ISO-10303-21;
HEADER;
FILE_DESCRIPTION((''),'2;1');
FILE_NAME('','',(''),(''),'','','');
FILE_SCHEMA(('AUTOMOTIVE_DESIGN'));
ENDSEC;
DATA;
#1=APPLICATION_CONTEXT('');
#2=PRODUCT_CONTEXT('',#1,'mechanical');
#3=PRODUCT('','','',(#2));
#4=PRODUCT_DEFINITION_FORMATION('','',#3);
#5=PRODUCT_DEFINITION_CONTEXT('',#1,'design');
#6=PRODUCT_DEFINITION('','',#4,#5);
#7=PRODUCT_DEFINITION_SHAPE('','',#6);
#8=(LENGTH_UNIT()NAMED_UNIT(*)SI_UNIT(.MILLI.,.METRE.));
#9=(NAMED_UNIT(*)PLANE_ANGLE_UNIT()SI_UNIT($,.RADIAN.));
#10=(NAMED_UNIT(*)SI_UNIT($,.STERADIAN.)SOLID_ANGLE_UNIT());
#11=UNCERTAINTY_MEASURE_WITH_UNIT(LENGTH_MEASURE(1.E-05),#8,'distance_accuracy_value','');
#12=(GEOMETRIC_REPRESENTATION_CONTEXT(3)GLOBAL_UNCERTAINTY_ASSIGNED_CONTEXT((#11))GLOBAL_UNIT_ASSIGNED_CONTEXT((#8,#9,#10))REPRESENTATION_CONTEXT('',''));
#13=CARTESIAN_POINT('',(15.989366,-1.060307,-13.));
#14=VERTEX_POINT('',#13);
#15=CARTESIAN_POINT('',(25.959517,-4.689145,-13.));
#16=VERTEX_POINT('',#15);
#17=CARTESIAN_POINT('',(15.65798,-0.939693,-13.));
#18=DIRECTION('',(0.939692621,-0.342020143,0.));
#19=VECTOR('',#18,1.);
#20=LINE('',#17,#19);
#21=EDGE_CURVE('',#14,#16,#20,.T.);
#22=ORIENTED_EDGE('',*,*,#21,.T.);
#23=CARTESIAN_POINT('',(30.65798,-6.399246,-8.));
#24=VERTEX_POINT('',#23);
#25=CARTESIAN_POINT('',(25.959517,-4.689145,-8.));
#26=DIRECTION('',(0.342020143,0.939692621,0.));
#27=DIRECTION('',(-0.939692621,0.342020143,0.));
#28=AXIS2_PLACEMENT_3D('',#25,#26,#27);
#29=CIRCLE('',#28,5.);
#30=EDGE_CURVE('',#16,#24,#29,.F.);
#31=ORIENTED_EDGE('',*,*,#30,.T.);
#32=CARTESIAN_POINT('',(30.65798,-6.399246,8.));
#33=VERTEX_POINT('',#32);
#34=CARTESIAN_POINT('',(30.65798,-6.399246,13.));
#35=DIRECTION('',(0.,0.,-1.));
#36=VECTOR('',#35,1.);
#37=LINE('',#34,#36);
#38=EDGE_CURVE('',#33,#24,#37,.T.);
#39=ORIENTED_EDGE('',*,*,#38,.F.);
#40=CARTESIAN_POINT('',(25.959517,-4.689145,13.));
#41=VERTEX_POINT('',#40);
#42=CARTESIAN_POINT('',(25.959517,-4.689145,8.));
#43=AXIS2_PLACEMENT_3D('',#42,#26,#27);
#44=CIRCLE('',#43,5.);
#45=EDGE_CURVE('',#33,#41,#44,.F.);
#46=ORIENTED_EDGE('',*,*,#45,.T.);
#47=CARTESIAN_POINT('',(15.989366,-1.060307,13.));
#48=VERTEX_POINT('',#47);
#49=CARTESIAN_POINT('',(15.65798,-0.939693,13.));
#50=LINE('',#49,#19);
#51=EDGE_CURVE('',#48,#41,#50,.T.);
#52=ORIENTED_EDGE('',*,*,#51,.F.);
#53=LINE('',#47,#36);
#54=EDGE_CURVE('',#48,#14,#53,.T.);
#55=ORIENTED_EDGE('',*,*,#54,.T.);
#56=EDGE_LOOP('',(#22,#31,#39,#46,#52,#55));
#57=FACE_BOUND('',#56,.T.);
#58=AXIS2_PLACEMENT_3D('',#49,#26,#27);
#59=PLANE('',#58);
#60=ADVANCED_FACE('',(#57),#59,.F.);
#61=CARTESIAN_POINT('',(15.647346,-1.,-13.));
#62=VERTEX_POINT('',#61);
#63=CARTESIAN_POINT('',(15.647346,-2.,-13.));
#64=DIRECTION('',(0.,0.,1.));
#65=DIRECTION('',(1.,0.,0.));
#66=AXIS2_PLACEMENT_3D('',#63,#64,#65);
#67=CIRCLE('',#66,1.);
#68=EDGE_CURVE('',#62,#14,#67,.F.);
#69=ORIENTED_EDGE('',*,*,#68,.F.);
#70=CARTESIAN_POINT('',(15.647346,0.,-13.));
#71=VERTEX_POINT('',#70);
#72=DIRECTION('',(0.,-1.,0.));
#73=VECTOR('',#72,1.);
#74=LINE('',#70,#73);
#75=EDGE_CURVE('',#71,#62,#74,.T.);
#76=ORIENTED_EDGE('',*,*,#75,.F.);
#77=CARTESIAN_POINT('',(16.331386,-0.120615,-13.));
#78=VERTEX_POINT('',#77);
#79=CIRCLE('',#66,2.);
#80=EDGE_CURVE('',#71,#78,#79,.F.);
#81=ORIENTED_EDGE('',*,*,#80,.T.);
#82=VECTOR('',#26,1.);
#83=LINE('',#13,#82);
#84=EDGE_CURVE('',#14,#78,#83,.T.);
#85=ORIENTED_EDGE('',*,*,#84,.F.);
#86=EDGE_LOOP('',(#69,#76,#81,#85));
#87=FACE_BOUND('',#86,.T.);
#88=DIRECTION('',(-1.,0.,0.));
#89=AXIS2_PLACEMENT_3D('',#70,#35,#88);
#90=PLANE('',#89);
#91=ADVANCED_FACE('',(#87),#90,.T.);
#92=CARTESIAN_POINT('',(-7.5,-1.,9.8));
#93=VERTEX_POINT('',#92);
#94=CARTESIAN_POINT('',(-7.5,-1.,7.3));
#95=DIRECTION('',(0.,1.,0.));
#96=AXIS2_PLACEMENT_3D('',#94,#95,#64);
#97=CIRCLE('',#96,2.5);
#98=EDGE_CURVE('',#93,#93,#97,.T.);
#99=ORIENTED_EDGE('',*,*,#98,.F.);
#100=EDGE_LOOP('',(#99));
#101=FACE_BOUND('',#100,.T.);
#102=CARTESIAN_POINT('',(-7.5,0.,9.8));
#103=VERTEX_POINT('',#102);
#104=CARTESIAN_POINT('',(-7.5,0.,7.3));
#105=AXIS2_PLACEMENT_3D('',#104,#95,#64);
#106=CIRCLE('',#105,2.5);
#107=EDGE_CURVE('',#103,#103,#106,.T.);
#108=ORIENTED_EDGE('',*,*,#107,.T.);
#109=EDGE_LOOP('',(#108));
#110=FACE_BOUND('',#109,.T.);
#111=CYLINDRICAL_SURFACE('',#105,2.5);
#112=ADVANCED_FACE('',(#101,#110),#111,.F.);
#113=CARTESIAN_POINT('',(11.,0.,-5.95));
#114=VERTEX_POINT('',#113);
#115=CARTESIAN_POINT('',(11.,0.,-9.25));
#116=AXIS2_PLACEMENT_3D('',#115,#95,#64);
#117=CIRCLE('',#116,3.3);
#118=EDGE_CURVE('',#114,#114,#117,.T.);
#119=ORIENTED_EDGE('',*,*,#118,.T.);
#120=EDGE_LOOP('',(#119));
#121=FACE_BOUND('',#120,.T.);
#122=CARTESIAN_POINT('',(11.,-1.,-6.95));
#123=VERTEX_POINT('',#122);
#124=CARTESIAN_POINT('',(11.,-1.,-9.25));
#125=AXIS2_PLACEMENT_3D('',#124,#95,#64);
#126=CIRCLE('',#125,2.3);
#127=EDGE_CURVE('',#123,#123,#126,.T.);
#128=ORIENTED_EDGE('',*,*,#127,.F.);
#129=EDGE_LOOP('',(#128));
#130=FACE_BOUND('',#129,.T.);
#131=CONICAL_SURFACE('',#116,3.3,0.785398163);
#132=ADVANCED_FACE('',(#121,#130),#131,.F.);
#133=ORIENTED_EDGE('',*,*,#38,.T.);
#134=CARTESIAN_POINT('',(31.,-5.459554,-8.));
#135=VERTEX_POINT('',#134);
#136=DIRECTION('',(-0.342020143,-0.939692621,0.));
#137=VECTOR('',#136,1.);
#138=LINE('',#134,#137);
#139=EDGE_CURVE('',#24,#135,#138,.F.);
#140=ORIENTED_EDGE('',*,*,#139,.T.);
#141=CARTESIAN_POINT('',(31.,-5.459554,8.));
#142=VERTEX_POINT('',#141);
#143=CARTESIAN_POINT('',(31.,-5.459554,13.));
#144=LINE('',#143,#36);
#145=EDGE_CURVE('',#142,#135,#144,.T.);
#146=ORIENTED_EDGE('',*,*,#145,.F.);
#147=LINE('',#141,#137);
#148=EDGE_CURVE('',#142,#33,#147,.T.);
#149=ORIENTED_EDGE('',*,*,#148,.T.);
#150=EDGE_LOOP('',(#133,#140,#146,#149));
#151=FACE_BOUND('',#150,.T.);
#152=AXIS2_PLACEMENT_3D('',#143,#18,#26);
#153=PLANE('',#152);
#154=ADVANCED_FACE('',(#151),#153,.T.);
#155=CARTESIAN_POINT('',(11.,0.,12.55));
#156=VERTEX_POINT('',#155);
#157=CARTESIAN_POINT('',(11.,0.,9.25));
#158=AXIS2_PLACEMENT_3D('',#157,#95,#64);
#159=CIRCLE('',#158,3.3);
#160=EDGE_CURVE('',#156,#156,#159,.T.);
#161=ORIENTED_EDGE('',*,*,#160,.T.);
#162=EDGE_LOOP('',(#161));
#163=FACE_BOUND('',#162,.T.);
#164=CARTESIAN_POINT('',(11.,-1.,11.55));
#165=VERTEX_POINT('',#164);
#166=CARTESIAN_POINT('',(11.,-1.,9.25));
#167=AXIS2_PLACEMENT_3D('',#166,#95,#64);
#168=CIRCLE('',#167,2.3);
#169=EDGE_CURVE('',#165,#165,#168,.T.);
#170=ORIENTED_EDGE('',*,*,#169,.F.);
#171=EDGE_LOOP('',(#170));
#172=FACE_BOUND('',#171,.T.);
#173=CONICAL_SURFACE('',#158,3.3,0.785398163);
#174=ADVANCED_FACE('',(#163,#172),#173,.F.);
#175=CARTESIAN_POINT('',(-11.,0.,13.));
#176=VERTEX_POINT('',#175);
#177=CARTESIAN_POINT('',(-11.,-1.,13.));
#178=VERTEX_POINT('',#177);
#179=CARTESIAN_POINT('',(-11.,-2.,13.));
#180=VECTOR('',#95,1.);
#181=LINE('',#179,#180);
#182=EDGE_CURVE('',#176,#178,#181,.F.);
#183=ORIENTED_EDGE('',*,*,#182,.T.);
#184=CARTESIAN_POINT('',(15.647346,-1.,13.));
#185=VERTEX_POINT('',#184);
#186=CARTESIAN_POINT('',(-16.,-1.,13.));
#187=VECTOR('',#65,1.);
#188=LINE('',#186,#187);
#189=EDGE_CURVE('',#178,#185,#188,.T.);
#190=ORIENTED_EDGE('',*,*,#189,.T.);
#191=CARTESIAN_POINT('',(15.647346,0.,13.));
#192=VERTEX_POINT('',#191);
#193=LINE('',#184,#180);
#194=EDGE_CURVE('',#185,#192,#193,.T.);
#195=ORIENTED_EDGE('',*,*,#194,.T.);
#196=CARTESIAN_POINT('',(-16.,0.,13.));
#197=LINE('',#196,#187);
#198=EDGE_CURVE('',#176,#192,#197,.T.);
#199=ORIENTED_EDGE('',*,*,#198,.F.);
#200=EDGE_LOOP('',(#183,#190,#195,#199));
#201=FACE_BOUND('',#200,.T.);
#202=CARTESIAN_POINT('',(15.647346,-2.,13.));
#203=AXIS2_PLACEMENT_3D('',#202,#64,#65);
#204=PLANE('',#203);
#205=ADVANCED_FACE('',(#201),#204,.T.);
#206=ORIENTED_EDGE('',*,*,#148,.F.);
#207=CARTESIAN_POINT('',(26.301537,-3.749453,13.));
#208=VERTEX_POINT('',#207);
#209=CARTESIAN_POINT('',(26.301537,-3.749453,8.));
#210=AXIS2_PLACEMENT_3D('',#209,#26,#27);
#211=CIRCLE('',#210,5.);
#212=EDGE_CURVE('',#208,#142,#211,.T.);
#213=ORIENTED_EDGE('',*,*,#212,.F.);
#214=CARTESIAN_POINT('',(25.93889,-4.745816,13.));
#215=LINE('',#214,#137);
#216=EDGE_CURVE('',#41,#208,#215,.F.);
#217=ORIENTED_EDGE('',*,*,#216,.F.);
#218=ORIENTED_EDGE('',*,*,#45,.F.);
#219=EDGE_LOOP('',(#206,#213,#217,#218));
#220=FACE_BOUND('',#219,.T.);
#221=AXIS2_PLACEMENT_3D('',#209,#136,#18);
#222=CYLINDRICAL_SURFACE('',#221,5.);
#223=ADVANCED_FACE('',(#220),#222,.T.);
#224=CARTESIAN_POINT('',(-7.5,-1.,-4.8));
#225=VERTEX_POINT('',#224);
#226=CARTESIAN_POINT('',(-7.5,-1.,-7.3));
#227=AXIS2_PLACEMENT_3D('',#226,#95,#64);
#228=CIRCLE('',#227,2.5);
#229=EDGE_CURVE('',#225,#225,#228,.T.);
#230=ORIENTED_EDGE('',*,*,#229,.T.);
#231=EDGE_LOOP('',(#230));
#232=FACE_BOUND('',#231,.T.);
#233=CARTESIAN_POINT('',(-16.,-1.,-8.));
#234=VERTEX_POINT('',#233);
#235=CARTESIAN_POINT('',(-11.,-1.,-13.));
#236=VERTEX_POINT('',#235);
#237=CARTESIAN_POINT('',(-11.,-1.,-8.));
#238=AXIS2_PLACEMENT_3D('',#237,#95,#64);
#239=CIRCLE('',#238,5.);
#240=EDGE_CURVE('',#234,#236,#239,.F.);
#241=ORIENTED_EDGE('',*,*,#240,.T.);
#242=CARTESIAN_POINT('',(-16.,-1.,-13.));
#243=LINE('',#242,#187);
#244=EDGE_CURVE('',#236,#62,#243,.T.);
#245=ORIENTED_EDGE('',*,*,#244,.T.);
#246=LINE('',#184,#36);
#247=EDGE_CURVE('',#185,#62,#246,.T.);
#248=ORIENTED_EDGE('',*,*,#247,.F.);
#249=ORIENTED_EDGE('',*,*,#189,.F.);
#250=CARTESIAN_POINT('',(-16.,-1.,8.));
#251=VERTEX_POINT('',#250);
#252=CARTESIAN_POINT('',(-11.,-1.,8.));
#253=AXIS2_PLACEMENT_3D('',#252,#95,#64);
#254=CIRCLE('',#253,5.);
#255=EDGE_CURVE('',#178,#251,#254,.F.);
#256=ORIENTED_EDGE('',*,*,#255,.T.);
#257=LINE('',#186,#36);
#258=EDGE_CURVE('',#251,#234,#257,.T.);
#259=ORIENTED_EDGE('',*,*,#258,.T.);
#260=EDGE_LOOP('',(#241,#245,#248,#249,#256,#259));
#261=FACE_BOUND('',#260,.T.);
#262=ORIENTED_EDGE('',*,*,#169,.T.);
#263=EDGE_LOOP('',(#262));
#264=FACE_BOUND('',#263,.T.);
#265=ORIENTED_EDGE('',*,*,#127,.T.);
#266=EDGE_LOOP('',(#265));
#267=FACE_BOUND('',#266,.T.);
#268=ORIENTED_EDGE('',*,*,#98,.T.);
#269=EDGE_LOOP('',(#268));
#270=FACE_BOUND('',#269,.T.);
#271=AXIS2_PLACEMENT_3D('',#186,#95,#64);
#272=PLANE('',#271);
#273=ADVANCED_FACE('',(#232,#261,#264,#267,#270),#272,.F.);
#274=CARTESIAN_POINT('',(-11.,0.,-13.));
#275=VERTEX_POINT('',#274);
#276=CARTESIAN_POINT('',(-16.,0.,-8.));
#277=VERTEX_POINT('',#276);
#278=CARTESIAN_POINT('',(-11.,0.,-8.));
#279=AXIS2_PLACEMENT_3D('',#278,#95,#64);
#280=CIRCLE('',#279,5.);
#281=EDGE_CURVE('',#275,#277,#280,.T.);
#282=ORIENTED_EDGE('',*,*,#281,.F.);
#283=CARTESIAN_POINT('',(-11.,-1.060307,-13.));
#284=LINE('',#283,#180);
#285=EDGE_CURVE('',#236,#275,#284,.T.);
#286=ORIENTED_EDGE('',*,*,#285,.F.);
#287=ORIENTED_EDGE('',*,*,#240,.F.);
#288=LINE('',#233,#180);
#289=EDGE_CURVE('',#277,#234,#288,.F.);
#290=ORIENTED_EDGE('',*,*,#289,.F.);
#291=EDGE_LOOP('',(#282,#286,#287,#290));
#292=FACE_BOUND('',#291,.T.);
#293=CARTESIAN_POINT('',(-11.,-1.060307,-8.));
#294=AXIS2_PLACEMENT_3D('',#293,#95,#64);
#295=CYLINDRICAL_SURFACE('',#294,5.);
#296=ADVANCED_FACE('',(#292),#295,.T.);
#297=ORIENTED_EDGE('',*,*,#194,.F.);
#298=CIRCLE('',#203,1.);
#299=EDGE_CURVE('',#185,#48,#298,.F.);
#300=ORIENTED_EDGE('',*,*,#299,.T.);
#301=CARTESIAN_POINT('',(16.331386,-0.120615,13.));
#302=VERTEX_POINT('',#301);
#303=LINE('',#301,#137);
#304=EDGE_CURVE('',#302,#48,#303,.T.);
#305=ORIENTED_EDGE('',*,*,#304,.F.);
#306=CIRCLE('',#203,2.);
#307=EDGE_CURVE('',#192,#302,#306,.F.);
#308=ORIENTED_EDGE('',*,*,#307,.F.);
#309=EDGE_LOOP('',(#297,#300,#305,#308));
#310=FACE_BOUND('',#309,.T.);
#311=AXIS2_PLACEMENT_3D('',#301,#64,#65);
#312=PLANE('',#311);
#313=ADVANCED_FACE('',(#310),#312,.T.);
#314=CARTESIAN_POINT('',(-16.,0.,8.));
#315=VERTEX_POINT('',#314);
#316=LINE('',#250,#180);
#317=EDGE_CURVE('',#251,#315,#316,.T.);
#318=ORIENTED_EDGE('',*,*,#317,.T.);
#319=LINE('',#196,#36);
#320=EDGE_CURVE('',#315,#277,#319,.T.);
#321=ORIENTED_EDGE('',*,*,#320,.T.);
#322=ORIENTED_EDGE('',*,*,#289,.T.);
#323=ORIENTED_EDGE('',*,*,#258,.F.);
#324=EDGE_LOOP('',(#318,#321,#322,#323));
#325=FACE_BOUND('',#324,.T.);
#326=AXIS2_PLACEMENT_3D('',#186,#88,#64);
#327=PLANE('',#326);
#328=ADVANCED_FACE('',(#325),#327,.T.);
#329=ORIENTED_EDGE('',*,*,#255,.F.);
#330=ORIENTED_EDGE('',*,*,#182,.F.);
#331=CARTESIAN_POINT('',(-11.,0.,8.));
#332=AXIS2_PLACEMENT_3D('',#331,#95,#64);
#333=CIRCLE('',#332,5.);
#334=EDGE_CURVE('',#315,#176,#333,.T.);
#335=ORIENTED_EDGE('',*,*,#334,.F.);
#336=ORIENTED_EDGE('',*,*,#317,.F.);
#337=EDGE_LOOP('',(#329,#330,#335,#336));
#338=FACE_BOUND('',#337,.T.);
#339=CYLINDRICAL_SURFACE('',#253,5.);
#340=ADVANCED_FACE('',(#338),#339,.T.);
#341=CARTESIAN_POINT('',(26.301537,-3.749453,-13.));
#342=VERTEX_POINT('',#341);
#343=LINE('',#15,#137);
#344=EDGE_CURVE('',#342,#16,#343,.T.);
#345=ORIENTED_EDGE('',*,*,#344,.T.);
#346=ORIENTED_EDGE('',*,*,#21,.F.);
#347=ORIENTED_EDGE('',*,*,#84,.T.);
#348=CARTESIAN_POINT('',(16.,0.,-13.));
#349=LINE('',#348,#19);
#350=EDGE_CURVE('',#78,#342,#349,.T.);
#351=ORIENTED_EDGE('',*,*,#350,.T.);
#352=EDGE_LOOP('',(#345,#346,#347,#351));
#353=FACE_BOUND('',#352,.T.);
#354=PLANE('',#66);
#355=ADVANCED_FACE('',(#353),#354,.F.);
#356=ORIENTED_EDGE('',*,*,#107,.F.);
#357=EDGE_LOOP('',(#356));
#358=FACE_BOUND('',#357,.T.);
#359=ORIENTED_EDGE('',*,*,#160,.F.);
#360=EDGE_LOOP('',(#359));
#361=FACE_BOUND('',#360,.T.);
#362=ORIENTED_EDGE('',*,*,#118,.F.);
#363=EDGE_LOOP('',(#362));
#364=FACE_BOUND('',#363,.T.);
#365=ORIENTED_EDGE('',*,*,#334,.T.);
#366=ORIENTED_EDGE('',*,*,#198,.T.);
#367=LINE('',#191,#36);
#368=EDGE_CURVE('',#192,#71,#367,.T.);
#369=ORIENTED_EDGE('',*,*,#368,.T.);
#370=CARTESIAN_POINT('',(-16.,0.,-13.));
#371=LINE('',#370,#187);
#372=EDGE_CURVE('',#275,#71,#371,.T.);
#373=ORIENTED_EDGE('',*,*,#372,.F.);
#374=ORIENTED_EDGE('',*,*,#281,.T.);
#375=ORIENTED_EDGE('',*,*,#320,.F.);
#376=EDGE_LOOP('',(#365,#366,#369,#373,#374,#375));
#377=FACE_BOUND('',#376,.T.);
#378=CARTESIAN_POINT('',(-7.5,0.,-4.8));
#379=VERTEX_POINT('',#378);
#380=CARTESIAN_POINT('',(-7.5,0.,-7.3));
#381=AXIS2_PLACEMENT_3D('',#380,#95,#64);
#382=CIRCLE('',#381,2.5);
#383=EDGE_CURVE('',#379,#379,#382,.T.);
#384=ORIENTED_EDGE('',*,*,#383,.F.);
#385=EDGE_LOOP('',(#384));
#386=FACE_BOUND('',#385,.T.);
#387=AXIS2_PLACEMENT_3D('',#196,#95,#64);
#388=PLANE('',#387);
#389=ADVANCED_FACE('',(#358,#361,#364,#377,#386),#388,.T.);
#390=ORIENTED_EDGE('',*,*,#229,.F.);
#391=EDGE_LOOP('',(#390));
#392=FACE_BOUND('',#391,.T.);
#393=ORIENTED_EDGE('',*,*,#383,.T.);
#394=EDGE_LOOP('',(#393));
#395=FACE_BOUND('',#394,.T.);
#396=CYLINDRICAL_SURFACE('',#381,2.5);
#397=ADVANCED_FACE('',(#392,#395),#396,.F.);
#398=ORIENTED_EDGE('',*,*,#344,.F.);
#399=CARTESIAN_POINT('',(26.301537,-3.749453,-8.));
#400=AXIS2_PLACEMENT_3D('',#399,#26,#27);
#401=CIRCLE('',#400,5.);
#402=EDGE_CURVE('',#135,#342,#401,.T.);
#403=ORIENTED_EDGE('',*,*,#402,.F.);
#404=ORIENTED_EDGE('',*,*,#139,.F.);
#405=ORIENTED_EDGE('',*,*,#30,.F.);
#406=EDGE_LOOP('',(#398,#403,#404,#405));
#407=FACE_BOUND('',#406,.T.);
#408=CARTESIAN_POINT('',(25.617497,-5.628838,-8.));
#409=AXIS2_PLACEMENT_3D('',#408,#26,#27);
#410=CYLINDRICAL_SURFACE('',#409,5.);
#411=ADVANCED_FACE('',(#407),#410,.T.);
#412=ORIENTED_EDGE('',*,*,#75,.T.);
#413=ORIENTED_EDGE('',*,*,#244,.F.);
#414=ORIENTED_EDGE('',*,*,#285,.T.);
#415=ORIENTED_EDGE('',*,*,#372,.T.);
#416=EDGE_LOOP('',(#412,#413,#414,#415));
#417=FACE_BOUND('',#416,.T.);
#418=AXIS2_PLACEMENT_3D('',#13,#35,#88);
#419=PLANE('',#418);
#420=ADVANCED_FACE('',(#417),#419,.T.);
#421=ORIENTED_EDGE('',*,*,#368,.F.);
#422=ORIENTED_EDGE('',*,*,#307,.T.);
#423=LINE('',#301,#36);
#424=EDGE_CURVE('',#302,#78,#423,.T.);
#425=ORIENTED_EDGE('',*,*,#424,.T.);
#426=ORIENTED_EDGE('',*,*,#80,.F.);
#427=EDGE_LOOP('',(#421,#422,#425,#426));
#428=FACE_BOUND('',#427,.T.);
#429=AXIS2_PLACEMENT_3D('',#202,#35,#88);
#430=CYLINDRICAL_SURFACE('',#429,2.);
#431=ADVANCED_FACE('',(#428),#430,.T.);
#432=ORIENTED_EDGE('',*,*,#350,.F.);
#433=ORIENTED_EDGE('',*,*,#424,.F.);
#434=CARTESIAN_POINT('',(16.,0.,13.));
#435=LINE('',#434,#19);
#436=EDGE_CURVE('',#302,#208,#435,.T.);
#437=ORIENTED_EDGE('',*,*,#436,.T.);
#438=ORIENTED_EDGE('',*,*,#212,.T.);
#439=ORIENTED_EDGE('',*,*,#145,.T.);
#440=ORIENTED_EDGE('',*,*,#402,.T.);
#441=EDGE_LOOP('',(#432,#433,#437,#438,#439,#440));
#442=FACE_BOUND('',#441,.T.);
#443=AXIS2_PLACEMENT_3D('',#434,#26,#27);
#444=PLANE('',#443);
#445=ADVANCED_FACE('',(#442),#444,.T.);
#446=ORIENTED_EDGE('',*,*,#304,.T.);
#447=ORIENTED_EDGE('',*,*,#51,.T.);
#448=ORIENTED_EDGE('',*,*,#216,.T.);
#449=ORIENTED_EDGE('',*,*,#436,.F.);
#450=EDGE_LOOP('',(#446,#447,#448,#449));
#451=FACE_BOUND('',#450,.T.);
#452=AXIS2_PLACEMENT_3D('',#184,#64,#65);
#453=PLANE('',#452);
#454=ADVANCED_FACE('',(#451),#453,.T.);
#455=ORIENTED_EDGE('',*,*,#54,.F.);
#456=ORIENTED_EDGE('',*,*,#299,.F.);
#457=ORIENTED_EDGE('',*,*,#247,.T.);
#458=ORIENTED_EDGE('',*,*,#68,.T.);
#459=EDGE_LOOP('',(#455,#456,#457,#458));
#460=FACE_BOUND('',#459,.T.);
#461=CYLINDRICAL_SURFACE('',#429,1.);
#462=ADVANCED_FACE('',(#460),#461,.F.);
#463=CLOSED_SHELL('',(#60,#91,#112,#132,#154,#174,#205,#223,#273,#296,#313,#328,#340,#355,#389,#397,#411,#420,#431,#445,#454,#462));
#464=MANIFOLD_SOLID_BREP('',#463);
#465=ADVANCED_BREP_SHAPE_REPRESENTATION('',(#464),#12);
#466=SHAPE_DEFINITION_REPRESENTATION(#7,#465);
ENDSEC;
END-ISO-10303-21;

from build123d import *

# Parameters (mm, degrees)
SM_BASE_FLANGE_1_DEPTH   = 13
HOLE_WIZARD_1_AT_2_COUNT = 2
HOLE_WIZARD_1_AT_2_PITCH = 18.5
HOLE_WIZARD_5_0_5_1_D    = 5
FILLET_1_R               = 5


# Sheet-metal steps are written as plain solids
with BuildPart() as part:
    # Sketch 1 → 基体-法兰1 (new, symmetric)
    with BuildSketch(Plane.XY):
        with BuildLine():
            Line((-16, 0), (15.647346039, 0))
            ThreePointArc((15.647346039, 0), (15.994642394, -0.030384494), (16.331386325, -0.120614758))
            Line((16.331386325, -0.120614758), (31, -5.459553514))
            Line((31, -5.459553514), (30.657979857, -6.399246135))
            Line((30.657979857, -6.399246135), (15.989366182, -1.060307379))
            ThreePointArc((15.989366182, -1.060307379), (15.820994216, -1.015192247), (15.647346039, -1))
            Line((15.647346039, -1), (-16, -1))
            Line((-16, -1), (-16, 0))
        make_face()
    extrude(amount=SM_BASE_FLANGE_1_DEPTH, both=True)

    # 草图6 → 打孔尺寸(%根据十字)槽沉头木螺钉的类型1 (revolve, cut)
    with BuildSketch(Plane(origin=(11, 0, 9.25), x_dir=(0, 0, 1), z_dir=(1, 0, 0))):
        Polygon((0, 0), (0, 1), (1.7, 1), (1.7, 1.6), (3.3, 0), align=None)
    hole_wizard_1 = revolve(axis=Axis((11, 6.35, 9.25), (0, -1, 0)), mode=Mode.SUBTRACT)

    # 打孔尺寸(%根据十字)槽沉头木螺钉的类型1 at 2: 打孔尺寸(%根据十字)槽沉头木螺钉的类型1 ×2
    with Locations(*[(0, 0, -i * HOLE_WIZARD_1_AT_2_PITCH) for i in range(1, HOLE_WIZARD_1_AT_2_COUNT)]):
        add(hole_wizard_1, mode=Mode.SUBTRACT)

    # Ø5.0 (5) 直径孔1 (through all)
    with Locations(Plane(origin=(0, 0, 0), x_dir=(1, 0, 0), z_dir=(0, 1, 0))):
        with Locations((-7.5, -7.3), (-7.5, 7.3)):
            Hole(HOLE_WIZARD_5_0_5_1_D / 2)

    # 圆角1
    fillet_1_edges = [part.edges().sort_by_distance(p)[0] for p in [
        (-16, -0.5, 13),
        (30.828989928, -5.929399824, 13),
        (-16, -0.5, -13),
        (30.828989928, -5.929399824, -13),
    ]]
    fillet(fillet_1_edges, radius=FILLET_1_R)


solid = part.part
